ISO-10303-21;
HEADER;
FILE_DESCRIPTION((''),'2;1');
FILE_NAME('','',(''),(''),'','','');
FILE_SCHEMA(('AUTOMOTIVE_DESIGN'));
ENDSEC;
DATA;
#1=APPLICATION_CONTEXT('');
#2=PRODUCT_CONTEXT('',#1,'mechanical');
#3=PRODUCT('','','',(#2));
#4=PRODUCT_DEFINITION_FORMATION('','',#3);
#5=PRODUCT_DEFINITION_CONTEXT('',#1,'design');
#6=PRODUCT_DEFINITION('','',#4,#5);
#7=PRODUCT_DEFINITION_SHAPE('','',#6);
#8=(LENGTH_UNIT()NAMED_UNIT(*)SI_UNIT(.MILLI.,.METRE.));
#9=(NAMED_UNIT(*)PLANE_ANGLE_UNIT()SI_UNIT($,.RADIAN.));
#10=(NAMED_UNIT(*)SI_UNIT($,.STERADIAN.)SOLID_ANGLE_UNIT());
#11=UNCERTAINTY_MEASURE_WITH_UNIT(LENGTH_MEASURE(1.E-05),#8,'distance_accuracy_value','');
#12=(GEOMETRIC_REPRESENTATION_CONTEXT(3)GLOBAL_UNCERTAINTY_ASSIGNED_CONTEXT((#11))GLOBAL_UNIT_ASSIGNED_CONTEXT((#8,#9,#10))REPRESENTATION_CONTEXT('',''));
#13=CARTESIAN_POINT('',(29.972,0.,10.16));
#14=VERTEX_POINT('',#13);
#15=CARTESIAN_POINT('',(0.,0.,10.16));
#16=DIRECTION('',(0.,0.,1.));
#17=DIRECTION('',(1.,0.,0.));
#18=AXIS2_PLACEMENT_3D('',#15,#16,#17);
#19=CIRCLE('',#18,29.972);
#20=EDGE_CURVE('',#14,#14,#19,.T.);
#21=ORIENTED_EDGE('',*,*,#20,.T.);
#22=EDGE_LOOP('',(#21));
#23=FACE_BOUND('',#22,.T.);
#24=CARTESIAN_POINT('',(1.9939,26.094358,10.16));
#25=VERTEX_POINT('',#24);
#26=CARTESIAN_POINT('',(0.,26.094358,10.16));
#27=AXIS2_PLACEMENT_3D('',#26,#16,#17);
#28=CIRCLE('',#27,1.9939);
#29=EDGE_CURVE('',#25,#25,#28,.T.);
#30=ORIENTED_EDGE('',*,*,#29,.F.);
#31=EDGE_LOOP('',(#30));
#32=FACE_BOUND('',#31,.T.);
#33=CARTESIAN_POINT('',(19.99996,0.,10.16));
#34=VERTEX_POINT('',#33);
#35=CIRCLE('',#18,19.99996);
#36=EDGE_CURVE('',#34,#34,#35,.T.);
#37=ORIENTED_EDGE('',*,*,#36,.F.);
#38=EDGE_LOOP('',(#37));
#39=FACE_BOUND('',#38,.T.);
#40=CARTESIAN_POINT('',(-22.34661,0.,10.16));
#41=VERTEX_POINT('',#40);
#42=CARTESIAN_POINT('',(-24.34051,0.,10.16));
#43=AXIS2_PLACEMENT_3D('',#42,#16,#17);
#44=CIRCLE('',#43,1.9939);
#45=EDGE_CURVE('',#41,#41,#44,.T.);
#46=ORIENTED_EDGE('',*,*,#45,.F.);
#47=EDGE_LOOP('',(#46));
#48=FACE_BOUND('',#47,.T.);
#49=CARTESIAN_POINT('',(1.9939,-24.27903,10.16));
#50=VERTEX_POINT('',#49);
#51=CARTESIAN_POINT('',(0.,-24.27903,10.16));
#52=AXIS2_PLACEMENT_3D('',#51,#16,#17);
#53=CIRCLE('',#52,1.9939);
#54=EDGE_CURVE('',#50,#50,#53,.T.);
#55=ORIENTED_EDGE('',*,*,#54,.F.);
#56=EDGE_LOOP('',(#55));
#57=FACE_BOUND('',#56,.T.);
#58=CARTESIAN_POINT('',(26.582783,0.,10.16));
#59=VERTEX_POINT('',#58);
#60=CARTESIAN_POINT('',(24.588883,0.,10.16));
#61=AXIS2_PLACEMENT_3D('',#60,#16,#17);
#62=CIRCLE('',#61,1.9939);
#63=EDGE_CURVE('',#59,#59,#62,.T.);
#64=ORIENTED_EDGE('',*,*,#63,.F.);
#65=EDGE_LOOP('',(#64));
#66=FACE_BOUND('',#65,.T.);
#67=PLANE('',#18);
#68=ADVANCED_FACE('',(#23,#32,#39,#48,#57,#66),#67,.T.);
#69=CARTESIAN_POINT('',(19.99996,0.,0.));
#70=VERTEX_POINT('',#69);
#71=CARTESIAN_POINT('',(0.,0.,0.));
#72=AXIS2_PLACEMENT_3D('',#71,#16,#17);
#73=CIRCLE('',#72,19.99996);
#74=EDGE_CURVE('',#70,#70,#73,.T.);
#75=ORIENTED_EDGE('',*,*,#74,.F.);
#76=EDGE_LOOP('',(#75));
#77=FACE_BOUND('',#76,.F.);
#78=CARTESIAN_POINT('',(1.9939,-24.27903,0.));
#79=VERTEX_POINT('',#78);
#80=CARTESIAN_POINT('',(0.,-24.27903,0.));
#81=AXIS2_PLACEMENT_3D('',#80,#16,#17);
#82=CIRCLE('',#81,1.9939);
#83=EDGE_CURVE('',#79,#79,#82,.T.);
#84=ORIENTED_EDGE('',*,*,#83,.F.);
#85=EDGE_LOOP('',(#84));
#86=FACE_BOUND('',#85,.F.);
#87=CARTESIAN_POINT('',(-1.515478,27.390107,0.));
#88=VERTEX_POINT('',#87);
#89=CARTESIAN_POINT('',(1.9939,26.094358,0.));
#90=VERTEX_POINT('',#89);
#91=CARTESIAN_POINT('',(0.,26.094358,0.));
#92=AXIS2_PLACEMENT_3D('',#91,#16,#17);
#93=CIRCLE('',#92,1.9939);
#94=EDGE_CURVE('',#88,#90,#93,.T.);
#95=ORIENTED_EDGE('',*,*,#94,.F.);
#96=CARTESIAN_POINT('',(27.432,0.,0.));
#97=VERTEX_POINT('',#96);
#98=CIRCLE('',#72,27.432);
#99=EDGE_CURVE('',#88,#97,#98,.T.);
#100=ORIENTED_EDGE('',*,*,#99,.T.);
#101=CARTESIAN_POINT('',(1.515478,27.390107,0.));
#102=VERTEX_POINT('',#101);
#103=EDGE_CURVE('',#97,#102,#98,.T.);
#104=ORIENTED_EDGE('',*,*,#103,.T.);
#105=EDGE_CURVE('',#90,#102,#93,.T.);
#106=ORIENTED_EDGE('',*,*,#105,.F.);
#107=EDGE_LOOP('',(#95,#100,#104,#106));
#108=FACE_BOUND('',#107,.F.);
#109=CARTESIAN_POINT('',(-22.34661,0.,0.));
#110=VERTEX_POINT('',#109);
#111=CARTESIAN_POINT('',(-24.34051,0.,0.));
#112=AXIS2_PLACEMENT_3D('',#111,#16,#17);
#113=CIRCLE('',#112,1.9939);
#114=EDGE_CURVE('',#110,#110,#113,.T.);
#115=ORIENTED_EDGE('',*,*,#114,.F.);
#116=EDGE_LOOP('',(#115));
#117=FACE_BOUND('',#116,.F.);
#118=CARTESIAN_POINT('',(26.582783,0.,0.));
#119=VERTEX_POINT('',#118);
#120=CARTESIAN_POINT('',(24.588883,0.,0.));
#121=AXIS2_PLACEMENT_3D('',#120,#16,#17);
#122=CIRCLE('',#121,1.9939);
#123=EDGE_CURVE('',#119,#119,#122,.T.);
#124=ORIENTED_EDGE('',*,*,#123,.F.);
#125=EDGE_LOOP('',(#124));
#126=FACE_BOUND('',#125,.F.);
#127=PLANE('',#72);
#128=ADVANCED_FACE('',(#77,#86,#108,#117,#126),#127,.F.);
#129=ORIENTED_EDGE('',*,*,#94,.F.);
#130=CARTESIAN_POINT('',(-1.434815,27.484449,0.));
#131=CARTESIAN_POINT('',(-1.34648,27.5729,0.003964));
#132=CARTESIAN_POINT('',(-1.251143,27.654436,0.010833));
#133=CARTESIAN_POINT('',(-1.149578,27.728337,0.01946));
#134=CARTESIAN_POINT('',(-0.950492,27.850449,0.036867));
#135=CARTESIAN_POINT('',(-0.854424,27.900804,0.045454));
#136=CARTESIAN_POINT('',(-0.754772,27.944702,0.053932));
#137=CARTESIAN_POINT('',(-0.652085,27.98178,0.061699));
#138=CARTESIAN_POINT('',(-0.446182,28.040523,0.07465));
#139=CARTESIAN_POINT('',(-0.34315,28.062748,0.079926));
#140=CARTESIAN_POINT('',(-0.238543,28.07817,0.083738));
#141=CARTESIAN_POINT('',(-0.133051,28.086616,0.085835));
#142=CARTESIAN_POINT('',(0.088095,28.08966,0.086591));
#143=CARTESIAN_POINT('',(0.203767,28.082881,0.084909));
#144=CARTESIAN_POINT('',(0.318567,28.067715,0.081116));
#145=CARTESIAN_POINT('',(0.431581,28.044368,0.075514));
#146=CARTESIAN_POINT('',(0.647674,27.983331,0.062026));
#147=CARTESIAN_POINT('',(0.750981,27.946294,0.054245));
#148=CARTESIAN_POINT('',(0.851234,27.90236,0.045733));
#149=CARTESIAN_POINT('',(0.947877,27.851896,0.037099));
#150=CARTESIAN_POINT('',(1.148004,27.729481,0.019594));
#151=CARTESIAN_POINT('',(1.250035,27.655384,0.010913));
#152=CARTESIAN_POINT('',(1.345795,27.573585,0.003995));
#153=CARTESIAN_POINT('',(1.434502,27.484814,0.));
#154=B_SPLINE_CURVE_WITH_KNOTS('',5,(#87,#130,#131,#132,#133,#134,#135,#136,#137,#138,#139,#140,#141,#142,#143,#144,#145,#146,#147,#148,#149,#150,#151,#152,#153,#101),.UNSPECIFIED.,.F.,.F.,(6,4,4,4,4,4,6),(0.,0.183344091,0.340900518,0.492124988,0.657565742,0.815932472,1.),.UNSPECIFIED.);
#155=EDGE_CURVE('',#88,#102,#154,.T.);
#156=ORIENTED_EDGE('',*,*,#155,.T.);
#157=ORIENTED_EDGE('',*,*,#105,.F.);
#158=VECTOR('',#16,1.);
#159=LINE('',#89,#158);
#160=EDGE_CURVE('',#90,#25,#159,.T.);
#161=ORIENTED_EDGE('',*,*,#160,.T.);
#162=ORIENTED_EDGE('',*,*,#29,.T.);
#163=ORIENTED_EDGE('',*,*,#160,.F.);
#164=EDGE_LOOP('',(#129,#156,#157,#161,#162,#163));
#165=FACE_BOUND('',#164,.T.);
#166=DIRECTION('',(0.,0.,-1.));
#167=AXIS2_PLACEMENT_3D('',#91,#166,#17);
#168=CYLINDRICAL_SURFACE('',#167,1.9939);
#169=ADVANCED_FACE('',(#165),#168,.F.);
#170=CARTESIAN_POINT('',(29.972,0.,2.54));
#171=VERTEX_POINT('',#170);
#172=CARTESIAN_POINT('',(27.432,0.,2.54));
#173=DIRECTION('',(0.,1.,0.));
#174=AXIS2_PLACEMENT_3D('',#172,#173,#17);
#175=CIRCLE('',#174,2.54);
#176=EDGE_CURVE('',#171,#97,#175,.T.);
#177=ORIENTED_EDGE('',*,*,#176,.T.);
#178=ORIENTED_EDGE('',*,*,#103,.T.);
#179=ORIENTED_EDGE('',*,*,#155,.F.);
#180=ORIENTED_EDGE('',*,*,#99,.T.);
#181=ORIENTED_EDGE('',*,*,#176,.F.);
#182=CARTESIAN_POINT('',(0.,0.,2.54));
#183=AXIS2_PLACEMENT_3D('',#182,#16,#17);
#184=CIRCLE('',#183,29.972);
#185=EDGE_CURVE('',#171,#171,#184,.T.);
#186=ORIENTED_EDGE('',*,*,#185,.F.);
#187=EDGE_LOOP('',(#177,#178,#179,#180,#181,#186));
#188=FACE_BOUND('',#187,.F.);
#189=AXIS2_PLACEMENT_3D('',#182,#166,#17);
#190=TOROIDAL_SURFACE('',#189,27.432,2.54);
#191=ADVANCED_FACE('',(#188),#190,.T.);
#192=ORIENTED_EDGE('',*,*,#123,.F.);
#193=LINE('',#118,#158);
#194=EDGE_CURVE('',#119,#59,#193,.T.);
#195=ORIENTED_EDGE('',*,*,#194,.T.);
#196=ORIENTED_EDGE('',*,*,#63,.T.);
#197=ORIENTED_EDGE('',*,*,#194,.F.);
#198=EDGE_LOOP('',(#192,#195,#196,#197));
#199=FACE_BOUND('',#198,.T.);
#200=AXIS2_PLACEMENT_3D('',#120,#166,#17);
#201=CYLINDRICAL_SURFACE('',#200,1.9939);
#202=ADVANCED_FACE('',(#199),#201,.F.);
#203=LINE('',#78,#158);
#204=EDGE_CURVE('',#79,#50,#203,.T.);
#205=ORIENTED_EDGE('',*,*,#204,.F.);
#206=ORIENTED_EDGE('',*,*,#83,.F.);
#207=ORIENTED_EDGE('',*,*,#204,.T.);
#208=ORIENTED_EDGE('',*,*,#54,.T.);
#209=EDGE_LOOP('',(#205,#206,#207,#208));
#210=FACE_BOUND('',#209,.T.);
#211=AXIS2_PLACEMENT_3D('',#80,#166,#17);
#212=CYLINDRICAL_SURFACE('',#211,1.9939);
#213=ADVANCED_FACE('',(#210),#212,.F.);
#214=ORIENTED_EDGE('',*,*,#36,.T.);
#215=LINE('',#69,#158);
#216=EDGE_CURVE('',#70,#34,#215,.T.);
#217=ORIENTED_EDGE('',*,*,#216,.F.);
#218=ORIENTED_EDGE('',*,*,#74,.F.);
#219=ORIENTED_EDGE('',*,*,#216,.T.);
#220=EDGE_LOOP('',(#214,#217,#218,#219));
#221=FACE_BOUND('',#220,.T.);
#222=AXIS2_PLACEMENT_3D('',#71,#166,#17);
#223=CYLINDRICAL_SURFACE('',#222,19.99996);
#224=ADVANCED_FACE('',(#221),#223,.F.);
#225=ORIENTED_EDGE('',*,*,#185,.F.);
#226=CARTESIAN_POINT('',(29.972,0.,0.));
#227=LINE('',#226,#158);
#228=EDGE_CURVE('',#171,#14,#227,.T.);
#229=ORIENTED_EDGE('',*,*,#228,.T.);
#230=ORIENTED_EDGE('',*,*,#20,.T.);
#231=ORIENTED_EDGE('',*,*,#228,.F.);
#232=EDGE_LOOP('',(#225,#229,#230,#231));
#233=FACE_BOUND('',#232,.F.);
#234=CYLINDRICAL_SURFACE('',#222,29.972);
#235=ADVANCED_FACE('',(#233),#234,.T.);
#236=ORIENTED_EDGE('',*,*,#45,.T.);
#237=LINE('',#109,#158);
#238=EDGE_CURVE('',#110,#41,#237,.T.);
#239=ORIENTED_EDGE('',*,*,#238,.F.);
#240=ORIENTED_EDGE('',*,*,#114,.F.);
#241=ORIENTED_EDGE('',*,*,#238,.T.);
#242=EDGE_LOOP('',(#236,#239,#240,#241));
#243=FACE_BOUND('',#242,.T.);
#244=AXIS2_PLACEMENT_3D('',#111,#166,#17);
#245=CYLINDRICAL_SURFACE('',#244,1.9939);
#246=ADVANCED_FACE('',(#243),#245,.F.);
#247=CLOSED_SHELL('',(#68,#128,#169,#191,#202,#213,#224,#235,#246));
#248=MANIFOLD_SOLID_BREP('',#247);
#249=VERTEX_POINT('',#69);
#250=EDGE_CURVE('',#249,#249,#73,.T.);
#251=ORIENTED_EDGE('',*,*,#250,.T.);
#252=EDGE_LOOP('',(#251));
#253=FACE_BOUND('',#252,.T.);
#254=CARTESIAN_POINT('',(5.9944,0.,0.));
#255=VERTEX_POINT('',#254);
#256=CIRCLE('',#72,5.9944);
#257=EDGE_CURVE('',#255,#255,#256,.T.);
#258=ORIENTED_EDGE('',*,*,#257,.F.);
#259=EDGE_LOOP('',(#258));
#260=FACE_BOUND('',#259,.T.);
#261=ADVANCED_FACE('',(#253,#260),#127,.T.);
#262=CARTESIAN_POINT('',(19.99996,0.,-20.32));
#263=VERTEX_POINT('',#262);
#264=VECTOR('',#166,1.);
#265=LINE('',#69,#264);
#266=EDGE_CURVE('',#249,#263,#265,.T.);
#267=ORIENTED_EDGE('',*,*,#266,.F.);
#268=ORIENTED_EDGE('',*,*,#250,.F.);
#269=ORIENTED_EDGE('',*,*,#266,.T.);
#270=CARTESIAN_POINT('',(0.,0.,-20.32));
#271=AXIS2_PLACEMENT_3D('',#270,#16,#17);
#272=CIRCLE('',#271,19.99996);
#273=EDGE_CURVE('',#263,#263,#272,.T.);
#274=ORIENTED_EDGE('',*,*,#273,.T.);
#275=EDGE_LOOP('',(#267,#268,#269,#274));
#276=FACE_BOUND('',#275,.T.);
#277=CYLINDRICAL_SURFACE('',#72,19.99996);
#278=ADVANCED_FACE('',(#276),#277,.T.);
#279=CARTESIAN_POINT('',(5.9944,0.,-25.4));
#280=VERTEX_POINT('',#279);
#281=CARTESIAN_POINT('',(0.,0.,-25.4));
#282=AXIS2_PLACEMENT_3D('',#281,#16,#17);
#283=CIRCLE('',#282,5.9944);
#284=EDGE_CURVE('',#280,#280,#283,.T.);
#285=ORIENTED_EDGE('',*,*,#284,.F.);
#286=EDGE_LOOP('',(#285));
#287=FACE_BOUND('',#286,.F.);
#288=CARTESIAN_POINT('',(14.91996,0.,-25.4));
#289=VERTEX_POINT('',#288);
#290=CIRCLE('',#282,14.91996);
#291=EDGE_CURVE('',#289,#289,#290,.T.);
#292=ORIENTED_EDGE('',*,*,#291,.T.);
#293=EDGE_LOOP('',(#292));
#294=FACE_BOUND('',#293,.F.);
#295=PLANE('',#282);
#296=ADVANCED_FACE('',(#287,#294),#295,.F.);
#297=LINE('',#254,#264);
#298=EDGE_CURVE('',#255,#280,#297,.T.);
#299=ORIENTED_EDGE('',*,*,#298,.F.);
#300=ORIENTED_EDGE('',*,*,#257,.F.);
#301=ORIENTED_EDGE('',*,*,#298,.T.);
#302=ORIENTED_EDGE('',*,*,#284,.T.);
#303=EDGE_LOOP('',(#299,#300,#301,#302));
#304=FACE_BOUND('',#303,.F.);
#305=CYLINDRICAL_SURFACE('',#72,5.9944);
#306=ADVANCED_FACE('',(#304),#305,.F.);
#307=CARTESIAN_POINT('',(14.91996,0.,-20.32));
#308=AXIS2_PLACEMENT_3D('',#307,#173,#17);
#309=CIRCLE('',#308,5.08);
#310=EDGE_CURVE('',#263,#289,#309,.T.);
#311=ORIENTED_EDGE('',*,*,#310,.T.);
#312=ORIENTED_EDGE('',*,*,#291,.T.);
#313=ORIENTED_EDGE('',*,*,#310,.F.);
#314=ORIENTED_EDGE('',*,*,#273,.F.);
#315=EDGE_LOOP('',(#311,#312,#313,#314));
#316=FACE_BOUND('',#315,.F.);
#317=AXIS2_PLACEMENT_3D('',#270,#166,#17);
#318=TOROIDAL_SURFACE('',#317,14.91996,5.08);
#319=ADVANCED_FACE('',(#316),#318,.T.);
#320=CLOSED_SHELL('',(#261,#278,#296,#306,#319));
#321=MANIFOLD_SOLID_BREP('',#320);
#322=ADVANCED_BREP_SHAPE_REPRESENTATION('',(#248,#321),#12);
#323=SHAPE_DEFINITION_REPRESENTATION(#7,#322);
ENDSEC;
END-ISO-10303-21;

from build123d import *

# Parameters (mm, degrees)
F0_R     = 19.99996
F0_R_2   = 5.9944
F1_DEPTH = 25.4
F0_R_3   = 29.972
F0_R_4   = 1.9939
F2_DEPTH = 10.16
F3_R     = 5.08


# Not quite as in the source:
# - a fillet or chamfer that OpenCascade refuses, or shapes differently, is made with other operations: its cross-section is extruded or revolved along the edge and cut away or added
# - a feature names something its author has since deleted; it is built from what else it names


with BuildPart() as f1:
    # F0 (on Top) → F1 (new body)
    with BuildSketch(Plane.XY):
        Circle(F0_R)
        Circle(F0_R_2, mode=Mode.SUBTRACT)
    extrude(amount=-F1_DEPTH)

    # F3
    f3_edges = [f1.edges().sort_by_distance(p)[0] for p in [
        (-19.99996, 0, -25.4),
    ]]
    fillet(f3_edges, radius=F3_R)


with BuildPart() as f2:
    # F0 (on Top) → F2 (new body)
    with BuildSketch(Plane.XY):
        Circle(F0_R_3)
        with Locations((0, -24.2790300399)):
            Circle(F0_R_4, mode=Mode.SUBTRACT)
        with Locations((-24.3405103683, 0)):
            Circle(F0_R_4, mode=Mode.SUBTRACT)
        Circle(F0_R, mode=Mode.SUBTRACT)
        with Locations((24.5888829231, 0)):
            Circle(F0_R_4, mode=Mode.SUBTRACT)
        with Locations((0, 26.0943584144)):
            Circle(F0_R_4, mode=Mode.SUBTRACT)
    extrude(amount=F2_DEPTH)

    # F4: fillet of radius 2.54 on 1 edges, made by hand

    # F4_s1 → F4_t2 (revolve, cut)
    with BuildSketch(Plane.XZ):
        with BuildLine():
            ThreePointArc((29.972, 2.54), (29.2280512242, 0.7439487758), (27.432, 0))
            Line((27.432, 0), (29.972, 0))
            Line((29.972, 0), (29.972, 2.54))
        make_face()
    revolve(axis=Axis((0, 0, 0), (0, 0, 1)), mode=Mode.SUBTRACT)


solid = Compound([f1.part, f2.part])
